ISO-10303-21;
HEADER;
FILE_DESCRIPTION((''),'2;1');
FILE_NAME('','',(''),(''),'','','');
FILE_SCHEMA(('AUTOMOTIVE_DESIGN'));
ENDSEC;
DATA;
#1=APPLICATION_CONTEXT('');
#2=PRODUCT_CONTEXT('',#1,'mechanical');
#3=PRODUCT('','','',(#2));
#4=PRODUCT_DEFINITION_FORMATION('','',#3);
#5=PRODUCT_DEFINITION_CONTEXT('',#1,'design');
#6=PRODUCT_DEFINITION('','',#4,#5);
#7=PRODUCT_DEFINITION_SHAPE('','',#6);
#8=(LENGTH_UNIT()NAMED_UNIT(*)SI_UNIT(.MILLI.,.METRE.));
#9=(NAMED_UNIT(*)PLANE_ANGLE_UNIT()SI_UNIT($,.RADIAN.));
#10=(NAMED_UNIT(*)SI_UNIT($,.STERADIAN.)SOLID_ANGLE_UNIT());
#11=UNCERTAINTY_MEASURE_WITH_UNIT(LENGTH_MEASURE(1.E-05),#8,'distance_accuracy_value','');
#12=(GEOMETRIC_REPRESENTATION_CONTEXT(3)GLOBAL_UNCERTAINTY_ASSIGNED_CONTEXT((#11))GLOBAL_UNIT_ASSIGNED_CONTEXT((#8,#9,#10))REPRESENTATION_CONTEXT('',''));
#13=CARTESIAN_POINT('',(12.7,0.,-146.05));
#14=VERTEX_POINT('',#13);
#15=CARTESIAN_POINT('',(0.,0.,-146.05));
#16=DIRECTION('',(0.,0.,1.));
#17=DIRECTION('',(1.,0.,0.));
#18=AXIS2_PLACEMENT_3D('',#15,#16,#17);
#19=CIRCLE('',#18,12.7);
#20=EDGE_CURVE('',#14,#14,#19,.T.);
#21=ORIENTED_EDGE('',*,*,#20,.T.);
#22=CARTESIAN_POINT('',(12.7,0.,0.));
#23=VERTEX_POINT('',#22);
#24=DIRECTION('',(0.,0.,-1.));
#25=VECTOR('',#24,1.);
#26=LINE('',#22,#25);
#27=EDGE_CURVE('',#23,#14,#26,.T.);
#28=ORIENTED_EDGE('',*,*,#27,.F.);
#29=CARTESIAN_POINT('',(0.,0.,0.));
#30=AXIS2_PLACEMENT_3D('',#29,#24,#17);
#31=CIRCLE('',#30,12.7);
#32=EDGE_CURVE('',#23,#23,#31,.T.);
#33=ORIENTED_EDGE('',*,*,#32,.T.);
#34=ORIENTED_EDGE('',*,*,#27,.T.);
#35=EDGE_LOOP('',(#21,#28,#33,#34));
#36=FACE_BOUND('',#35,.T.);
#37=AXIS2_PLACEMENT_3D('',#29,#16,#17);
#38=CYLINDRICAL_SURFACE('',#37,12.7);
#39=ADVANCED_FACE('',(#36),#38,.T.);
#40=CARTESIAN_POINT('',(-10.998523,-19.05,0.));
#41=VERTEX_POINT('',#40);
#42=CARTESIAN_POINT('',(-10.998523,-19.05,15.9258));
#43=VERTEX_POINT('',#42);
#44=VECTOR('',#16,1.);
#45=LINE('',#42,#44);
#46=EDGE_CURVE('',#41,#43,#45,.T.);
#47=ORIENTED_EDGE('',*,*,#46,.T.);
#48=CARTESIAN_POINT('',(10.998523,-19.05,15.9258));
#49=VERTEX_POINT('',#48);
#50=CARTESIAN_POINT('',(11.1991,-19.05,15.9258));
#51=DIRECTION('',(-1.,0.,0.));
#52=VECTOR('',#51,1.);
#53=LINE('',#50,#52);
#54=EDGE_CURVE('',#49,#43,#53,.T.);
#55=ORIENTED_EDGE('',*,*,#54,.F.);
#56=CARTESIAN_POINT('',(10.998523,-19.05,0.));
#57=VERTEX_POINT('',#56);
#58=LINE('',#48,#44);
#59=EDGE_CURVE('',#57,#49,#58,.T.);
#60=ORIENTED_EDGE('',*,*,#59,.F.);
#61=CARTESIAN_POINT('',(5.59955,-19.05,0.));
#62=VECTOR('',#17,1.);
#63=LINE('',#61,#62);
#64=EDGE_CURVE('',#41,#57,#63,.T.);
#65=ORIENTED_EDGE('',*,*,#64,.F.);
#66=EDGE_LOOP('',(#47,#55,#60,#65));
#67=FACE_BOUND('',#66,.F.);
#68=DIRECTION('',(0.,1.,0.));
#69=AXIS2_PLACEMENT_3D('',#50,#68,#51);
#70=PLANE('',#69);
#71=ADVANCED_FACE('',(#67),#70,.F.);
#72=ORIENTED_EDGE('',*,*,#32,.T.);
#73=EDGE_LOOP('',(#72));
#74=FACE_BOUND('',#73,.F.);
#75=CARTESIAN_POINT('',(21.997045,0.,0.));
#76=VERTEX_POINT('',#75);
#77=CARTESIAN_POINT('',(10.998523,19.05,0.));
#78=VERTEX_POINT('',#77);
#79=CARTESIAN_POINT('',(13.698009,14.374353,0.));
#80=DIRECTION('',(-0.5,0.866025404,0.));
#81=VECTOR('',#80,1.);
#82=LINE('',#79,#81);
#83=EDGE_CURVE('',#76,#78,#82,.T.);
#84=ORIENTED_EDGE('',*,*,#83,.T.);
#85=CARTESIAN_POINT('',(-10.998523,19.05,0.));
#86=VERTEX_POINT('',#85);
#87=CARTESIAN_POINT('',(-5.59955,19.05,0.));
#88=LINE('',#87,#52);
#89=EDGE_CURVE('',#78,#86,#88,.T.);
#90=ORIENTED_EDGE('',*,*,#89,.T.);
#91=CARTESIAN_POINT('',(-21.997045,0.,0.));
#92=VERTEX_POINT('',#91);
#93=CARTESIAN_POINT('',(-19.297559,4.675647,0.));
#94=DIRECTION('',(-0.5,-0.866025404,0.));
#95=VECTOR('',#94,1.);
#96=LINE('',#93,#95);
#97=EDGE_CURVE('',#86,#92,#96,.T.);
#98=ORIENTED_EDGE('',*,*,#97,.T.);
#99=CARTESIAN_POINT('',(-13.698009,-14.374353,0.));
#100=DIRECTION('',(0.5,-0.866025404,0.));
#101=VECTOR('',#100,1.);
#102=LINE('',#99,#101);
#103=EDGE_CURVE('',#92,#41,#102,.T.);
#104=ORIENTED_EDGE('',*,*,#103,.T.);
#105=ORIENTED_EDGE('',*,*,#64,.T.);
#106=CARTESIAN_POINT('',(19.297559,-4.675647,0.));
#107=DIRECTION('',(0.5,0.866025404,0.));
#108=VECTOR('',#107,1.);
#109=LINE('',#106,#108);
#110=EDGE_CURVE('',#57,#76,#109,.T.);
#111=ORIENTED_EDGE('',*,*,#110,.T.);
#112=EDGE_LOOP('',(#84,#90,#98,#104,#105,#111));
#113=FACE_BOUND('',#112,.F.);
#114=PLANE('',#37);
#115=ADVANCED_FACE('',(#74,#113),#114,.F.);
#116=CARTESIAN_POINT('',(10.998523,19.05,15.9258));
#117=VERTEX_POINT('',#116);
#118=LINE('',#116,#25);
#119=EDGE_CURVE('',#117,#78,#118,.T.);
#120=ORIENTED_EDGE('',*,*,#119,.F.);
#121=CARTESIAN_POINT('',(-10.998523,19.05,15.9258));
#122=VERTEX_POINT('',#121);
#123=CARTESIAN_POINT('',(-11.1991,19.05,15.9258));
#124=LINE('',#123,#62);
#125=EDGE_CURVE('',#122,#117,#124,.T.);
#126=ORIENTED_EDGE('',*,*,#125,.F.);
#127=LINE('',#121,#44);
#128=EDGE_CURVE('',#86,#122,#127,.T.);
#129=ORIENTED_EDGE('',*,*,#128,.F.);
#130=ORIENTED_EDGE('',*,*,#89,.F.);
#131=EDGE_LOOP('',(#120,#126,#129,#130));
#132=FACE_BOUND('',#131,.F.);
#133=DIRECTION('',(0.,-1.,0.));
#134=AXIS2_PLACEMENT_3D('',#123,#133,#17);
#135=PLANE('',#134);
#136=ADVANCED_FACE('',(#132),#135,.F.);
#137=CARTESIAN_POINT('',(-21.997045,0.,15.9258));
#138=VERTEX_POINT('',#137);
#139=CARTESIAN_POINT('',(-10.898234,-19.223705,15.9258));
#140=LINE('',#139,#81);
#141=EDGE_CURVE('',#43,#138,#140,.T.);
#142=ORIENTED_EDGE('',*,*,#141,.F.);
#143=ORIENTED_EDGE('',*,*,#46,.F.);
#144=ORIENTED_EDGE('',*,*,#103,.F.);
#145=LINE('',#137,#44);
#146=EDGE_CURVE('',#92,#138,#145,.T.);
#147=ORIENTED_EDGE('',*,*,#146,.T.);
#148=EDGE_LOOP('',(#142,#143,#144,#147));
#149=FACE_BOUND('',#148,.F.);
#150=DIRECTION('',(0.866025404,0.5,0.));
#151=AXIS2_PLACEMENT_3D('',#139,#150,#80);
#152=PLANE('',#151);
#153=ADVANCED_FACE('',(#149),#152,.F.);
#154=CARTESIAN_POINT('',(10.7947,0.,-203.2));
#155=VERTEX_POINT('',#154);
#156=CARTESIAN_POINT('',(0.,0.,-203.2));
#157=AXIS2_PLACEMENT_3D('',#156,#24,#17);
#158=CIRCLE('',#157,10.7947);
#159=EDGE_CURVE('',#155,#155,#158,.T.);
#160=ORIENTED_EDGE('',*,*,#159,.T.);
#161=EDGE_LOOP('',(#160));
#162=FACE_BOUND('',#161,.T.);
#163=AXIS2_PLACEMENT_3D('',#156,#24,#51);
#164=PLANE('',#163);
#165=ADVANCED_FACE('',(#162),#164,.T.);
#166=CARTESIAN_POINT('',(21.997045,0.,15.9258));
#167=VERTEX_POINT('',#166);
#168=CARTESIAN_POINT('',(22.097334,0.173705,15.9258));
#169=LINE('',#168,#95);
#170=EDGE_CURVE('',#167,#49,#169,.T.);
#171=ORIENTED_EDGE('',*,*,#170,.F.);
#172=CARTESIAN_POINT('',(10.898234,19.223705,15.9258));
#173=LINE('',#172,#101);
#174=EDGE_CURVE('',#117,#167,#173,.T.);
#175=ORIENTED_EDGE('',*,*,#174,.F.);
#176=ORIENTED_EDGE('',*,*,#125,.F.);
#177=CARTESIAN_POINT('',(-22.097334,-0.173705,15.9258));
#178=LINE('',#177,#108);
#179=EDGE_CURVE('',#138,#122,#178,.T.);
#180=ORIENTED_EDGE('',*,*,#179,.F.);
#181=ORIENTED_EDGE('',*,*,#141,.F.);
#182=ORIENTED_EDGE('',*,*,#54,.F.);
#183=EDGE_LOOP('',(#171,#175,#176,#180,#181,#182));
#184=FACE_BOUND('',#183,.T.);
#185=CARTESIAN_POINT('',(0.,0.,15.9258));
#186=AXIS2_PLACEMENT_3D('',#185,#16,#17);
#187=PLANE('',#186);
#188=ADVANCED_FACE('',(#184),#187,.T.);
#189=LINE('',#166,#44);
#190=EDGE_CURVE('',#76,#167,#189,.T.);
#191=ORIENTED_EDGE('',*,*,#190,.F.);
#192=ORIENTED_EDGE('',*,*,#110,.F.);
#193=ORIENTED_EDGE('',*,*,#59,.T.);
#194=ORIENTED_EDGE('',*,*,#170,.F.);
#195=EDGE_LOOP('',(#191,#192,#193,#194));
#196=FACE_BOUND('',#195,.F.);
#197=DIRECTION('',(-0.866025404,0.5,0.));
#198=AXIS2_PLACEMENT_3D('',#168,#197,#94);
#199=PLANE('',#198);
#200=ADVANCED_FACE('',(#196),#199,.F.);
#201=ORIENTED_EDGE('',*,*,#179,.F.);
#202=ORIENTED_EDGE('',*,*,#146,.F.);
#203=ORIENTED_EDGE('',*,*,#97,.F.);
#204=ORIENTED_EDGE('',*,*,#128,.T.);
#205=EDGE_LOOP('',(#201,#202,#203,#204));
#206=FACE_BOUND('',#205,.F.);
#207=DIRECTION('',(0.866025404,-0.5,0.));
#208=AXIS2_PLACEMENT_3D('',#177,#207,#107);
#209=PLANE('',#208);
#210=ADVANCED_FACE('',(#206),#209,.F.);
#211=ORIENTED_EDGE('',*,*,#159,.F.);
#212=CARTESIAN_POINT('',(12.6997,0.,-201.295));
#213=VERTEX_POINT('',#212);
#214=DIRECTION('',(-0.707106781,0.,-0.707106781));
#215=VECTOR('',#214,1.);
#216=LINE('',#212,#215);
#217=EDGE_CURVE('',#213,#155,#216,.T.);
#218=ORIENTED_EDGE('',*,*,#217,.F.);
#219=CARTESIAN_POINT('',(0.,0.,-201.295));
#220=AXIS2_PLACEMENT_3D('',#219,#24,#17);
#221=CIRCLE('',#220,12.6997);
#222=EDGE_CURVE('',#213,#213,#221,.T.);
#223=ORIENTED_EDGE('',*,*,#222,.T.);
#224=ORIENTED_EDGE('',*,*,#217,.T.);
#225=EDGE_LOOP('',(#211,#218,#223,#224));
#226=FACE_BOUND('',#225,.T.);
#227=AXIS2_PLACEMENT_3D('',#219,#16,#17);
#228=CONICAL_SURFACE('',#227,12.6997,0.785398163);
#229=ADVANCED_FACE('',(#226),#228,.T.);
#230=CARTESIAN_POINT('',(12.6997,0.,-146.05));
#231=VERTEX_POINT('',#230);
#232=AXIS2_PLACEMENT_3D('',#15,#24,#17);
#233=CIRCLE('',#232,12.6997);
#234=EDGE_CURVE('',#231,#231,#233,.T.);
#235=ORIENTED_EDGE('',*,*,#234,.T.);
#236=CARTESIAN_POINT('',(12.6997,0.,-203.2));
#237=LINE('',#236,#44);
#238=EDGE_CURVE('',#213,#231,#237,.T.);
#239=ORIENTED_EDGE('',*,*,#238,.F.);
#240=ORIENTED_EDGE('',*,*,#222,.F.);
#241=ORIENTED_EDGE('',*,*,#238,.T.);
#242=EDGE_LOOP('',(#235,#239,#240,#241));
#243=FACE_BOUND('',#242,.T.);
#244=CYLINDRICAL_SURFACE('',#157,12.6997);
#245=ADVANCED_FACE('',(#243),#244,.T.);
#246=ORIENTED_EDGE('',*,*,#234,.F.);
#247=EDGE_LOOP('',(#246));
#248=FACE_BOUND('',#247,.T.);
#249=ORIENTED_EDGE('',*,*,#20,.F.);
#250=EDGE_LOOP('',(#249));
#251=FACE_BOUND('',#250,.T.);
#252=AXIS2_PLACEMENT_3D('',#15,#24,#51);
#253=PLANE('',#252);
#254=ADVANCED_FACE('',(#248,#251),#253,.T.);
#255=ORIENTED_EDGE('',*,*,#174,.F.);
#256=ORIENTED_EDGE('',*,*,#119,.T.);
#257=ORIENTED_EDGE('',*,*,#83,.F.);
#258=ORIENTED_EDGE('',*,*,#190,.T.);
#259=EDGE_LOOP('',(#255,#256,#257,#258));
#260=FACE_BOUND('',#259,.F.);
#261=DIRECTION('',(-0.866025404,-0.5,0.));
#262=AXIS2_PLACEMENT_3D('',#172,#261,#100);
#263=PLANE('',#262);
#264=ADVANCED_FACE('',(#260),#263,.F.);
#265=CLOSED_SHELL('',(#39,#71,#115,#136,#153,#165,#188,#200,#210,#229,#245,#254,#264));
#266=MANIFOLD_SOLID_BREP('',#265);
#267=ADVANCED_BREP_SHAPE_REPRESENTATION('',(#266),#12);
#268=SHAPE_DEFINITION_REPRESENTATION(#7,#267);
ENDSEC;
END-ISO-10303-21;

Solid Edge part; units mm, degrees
sketch "Sketch1" plane through (0, 0, 0) normal (0, 0, 1) x (1, 0, 0)
  circle A0 centre (0, 0) radius 22.098
  dimension "D1" = 44.196
extrude "Protrusion1" add sketch "Sketch1" along normal blind 15.9258
sketch "Sketch2" plane through (0, 0, 0) normal (0, 0, -1) x (1, 0, 0)
  circle A0 centre (0, 0) radius 12.7
extrude "Protrusion2" add sketch "Sketch2" along normal blind 203.2
sketch "Sketch3" plane through (0, 0, -203.2) normal (0, 0, -1) x (1, 0, 0)
  circle A0 centre (0, 0) radius 12.6997
extrude "Cutout1" cut sketch "Sketch3" against normal blind 57.15 flip side to cut
chamfer "Chamfer_1" distance 1.905 angle 45 1 edges at (-12.6997, 0, -203.2)
sketch "Sketch4" plane through (0, 0, 15.9258) normal (0, 0, 1) x (1, 0, 0)
  line L0 (-11.1991, 19.05) -> (11.1991, 19.05)
  dimension "D1" = 38.1
extrude "Cutout2" cut sketch "Sketch4" against normal up to next material side at (0, 19.1, 15.9258)
pattern_circular "Pattern1" count 6 over 360 about axis through (0, 0, 15.9258) along (0, 0, 1) of "Cutout2"
properties part number "137280"
